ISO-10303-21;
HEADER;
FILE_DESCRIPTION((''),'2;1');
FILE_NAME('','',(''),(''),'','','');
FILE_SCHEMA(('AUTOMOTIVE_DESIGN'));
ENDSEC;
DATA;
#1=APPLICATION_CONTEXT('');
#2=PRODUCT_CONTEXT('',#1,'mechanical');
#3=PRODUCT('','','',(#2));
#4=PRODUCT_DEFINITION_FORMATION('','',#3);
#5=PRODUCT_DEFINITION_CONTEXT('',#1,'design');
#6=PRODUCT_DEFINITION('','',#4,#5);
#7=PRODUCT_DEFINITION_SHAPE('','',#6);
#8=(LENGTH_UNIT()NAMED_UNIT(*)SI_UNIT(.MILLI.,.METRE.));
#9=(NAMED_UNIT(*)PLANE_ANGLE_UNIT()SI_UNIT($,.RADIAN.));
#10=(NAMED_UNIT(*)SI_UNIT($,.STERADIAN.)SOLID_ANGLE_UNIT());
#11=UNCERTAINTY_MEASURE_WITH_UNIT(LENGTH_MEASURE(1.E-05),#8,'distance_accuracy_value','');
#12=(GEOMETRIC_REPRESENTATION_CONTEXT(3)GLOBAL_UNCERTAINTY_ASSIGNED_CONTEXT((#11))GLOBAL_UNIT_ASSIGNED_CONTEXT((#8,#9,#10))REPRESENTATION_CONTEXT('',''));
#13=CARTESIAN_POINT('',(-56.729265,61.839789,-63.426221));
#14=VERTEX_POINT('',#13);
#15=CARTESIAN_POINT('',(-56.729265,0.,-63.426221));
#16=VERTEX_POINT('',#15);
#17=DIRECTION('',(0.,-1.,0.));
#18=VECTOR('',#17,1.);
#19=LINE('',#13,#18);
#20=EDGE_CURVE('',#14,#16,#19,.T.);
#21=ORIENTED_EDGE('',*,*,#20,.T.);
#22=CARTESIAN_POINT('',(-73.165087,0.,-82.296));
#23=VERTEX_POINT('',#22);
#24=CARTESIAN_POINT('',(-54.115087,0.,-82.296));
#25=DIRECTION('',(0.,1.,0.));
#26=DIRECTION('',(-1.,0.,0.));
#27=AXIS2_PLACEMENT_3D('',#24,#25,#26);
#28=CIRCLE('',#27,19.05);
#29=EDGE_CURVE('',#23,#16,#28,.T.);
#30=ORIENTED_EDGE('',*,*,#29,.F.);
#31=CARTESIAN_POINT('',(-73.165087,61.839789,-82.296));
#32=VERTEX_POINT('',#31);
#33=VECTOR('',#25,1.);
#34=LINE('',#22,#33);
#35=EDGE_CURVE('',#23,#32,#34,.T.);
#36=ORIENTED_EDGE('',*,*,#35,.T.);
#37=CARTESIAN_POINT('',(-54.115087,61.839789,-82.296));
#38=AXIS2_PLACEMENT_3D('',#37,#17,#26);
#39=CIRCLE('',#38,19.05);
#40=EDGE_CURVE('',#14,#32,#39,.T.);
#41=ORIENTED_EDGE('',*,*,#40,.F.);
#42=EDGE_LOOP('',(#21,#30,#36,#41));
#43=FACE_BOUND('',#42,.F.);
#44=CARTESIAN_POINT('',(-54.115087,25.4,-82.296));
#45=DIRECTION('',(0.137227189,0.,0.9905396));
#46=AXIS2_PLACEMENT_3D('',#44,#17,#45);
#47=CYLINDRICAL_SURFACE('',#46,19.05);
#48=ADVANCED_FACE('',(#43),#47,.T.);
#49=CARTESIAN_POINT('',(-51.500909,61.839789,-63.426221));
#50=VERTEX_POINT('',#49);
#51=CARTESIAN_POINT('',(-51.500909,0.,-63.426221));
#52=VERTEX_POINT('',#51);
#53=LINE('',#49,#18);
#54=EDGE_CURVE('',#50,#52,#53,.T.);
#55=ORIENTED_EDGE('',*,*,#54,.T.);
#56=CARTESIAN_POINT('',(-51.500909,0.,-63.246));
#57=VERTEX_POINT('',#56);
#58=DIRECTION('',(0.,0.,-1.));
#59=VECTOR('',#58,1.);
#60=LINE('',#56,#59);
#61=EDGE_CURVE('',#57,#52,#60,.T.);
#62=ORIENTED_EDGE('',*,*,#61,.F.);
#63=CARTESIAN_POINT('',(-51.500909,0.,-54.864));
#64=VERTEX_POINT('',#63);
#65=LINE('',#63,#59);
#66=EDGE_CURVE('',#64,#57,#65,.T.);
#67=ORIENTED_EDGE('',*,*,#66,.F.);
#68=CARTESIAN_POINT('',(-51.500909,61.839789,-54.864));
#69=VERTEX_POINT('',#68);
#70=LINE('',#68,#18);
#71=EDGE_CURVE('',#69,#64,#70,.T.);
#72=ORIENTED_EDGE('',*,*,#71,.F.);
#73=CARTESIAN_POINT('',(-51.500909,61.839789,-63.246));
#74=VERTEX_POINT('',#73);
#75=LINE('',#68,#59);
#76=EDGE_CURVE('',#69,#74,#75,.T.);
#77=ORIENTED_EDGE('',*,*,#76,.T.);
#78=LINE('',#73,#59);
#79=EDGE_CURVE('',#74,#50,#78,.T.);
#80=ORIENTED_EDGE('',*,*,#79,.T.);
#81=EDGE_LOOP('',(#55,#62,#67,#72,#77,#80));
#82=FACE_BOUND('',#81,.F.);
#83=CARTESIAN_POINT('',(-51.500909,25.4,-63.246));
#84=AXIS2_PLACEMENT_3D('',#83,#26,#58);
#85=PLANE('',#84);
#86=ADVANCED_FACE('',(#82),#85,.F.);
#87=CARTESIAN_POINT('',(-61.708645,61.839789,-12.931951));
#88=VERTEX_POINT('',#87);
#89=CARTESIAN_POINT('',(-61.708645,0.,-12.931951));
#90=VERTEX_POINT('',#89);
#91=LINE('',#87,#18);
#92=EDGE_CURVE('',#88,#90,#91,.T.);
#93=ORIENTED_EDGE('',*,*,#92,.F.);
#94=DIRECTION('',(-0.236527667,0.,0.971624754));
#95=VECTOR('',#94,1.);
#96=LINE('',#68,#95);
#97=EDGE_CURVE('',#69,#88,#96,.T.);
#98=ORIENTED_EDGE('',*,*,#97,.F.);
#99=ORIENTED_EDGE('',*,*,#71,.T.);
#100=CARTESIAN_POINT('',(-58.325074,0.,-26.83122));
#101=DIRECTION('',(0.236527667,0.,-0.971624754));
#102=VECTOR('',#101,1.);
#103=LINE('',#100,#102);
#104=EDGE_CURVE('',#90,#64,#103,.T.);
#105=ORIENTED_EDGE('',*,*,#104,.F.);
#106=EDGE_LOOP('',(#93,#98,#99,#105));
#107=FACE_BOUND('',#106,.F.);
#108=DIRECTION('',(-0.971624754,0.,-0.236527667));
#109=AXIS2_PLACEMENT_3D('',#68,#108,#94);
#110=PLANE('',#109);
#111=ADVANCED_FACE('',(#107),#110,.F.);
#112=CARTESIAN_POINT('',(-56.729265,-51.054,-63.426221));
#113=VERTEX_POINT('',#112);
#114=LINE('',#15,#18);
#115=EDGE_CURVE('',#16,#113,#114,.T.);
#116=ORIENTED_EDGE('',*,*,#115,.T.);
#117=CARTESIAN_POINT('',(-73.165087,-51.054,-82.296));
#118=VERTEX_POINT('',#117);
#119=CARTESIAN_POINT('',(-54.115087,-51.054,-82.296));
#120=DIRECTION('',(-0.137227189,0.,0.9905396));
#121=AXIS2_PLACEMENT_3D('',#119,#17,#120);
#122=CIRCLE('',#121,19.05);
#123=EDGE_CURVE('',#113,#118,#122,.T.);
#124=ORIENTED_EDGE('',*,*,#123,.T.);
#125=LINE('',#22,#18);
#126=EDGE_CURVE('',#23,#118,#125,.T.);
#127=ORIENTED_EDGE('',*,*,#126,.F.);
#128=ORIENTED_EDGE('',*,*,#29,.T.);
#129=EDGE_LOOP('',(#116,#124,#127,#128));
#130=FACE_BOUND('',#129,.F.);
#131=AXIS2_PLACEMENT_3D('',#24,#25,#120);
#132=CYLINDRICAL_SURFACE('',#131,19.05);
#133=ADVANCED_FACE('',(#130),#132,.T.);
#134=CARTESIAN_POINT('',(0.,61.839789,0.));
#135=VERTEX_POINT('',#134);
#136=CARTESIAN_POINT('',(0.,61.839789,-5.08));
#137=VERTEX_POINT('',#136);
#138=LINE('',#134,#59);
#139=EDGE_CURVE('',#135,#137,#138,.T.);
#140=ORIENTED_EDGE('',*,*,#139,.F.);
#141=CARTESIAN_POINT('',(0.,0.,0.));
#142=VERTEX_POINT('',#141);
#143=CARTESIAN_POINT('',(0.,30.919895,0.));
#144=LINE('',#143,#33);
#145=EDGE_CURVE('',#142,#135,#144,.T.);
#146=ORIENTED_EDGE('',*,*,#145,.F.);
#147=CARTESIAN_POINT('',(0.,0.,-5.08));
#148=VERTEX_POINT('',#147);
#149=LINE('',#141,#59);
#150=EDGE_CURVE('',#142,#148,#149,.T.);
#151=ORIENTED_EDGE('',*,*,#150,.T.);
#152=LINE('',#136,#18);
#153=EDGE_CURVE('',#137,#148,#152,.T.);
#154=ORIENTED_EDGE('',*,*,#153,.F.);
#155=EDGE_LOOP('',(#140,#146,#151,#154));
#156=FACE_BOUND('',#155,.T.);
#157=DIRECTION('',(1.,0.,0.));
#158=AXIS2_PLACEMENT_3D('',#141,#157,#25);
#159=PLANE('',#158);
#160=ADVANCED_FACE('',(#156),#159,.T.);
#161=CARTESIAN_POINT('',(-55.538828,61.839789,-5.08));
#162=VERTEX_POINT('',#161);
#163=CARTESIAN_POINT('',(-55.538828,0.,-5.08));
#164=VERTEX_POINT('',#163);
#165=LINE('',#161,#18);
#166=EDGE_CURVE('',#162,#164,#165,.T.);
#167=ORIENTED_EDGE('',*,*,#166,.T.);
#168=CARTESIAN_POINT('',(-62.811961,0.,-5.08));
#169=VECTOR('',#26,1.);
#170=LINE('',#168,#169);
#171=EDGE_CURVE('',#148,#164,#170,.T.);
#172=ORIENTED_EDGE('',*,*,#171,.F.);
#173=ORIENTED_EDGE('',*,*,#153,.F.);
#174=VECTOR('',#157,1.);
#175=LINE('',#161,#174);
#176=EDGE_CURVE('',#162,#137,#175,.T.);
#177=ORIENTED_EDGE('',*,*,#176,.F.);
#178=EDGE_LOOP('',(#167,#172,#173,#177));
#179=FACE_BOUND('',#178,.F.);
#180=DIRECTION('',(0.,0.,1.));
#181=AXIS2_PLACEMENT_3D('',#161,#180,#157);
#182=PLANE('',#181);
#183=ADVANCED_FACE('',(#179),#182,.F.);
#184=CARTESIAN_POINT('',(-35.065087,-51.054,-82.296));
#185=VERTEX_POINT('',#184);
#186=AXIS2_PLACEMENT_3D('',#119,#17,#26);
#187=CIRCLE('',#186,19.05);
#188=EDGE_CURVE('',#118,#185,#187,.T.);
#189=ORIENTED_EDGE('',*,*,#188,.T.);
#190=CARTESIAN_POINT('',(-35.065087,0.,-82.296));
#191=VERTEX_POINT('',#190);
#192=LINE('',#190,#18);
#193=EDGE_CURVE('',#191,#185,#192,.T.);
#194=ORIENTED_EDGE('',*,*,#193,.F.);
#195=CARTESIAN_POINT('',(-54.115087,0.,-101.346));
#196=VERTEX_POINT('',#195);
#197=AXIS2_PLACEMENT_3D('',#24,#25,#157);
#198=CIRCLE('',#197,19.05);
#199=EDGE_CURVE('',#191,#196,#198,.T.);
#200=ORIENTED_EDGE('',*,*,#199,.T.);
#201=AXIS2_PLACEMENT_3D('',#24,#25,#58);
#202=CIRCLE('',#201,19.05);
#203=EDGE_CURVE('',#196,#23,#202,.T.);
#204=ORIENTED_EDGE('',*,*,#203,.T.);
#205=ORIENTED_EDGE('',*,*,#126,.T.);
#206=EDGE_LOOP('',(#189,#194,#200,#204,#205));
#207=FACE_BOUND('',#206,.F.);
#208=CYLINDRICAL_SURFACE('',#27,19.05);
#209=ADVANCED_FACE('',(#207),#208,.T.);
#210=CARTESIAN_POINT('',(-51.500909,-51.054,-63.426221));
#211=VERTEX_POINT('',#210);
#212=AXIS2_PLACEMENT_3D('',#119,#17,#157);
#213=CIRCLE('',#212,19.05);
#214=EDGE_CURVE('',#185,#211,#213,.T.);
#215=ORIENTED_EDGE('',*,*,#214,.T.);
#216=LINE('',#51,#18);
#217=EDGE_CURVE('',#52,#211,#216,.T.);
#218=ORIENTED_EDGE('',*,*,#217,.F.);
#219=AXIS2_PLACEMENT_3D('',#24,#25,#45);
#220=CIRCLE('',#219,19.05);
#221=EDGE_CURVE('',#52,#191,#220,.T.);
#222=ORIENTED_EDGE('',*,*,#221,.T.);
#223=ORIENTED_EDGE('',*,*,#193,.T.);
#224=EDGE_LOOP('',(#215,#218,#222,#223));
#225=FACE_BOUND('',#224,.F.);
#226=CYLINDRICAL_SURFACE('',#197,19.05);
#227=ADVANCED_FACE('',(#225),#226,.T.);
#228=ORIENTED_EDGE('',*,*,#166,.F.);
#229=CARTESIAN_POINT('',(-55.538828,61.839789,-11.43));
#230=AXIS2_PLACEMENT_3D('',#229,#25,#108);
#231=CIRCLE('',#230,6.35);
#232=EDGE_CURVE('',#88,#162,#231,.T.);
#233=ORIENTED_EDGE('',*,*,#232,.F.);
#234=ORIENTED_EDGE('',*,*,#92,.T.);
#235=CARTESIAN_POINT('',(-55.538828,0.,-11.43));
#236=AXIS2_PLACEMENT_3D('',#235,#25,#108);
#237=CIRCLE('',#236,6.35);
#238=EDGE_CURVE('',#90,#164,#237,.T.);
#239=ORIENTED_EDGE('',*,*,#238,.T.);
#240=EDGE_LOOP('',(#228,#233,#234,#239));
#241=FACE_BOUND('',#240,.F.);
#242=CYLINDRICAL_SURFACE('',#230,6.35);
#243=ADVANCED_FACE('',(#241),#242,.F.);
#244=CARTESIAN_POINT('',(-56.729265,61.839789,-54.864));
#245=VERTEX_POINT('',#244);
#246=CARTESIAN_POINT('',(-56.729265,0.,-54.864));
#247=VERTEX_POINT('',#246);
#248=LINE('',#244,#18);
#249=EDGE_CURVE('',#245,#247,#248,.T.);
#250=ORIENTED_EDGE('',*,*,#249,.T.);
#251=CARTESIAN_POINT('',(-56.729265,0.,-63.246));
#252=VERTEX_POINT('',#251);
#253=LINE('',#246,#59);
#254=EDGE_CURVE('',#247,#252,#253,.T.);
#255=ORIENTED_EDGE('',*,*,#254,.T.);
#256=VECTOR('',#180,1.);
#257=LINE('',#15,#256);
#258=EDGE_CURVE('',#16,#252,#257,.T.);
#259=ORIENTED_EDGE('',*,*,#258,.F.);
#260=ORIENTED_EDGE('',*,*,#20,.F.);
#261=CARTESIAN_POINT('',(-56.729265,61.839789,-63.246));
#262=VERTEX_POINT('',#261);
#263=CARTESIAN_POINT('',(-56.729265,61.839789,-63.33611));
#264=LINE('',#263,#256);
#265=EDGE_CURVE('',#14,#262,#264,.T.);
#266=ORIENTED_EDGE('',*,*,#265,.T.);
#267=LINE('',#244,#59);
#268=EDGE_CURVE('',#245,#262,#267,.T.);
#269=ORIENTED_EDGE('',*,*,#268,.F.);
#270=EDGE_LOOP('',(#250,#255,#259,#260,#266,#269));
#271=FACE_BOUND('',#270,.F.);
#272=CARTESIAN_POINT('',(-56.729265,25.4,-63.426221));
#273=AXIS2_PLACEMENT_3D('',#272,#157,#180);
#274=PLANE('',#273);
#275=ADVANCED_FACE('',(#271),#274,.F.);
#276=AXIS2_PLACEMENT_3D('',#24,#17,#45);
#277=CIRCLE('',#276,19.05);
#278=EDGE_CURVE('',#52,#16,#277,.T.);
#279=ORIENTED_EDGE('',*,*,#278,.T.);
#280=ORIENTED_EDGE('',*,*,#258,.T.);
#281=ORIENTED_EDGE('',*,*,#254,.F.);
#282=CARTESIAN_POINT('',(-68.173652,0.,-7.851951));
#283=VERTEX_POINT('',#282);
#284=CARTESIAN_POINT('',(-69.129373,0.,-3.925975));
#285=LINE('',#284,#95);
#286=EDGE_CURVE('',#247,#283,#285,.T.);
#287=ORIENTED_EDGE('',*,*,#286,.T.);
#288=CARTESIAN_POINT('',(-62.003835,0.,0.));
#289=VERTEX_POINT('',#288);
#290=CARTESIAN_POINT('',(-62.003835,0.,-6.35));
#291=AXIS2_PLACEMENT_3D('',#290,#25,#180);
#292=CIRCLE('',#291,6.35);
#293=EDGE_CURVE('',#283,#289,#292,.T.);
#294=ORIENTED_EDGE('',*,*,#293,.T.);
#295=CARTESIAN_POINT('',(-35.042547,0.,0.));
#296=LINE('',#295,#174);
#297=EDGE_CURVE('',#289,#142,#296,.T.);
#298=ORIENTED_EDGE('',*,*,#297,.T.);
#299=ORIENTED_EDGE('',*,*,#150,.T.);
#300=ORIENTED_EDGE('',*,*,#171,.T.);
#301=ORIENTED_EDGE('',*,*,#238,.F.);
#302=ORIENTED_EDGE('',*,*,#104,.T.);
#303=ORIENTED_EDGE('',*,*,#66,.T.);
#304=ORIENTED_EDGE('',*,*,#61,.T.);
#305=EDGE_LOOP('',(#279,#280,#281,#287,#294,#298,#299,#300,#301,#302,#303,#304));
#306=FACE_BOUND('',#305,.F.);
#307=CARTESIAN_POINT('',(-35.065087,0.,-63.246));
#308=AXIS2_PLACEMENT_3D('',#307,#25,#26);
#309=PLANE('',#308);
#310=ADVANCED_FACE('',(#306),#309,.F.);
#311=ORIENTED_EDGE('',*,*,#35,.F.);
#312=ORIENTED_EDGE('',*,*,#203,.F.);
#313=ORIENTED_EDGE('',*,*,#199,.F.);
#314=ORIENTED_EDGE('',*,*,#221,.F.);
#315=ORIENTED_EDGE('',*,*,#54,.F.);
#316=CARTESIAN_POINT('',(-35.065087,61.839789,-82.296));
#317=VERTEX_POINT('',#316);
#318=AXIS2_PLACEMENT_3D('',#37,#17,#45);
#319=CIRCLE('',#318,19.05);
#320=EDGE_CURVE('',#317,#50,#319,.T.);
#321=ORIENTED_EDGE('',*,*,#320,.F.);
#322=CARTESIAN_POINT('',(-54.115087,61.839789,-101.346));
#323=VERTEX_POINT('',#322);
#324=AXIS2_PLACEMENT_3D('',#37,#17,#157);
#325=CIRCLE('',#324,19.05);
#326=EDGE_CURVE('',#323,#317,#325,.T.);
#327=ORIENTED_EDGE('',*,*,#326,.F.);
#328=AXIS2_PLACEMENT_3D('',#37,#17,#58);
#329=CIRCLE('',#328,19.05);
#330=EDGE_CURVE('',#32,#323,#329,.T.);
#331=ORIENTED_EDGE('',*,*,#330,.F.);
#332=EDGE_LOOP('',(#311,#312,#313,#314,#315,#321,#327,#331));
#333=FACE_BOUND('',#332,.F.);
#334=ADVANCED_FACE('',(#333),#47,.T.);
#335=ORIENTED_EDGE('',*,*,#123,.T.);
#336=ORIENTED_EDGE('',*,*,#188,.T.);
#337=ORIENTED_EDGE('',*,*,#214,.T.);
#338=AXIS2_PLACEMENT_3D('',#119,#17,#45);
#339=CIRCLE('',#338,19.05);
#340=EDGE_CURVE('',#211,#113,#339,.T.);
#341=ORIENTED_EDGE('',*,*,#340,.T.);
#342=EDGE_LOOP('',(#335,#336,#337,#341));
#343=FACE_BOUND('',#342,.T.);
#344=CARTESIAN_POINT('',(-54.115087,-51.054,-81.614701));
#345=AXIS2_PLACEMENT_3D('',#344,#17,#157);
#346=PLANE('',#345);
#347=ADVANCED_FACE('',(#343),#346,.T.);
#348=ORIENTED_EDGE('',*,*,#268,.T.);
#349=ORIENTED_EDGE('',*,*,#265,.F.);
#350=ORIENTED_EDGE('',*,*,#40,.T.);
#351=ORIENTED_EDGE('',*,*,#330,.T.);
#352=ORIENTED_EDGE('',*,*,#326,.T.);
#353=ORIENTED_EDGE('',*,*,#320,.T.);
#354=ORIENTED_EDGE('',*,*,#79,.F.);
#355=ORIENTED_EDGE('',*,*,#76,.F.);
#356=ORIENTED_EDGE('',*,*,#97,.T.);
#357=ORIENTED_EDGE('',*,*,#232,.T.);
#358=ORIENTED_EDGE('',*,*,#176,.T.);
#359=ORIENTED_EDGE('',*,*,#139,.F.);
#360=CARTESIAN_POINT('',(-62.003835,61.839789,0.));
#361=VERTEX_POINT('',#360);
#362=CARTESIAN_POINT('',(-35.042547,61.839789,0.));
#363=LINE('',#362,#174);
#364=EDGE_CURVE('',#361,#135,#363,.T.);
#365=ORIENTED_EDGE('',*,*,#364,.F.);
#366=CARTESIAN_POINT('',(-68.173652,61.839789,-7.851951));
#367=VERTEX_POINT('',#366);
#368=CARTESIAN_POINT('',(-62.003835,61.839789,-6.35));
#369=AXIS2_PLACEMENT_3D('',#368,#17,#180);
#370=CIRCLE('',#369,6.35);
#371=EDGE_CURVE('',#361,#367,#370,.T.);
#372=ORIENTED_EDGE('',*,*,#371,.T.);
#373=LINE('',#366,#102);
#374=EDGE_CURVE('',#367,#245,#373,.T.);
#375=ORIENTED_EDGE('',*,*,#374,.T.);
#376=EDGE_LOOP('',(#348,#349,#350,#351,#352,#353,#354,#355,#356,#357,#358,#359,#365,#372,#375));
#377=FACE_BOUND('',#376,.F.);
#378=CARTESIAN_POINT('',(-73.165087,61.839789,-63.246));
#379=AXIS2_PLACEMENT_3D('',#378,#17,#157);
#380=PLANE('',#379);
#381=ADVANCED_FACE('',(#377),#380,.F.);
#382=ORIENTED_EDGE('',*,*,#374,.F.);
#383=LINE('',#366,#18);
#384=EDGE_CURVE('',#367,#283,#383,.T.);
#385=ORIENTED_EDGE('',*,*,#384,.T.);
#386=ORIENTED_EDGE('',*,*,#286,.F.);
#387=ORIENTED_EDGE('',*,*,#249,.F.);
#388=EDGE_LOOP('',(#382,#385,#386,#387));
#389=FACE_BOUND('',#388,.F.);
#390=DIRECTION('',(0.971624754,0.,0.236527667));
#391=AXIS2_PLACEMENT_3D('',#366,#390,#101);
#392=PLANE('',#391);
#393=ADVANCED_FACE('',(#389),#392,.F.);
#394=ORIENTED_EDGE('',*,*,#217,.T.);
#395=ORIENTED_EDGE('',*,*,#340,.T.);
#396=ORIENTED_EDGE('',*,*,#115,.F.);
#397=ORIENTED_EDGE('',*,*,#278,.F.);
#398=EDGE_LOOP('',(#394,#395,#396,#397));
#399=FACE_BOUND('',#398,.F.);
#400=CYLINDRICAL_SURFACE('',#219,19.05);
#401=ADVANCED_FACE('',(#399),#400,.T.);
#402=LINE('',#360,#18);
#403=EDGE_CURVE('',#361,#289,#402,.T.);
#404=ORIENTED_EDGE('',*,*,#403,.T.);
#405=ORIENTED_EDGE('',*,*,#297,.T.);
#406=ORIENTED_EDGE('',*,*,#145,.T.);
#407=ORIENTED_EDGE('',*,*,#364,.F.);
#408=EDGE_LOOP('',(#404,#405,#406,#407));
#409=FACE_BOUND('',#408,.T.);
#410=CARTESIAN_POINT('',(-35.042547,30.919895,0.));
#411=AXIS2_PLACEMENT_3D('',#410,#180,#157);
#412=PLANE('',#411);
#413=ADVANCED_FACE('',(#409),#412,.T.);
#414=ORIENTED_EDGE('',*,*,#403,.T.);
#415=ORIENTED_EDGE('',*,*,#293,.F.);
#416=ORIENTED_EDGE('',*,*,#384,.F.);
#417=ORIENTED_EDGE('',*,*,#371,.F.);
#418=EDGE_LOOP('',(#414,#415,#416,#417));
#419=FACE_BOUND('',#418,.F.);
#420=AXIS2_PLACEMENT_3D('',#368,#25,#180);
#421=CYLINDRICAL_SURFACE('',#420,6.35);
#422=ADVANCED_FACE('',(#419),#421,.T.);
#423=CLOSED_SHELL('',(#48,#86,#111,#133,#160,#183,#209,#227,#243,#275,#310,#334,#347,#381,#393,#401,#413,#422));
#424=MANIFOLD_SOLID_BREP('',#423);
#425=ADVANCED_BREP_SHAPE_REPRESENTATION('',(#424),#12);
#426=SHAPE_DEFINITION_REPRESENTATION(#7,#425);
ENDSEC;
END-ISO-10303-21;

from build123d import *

# Parameters (mm, degrees)
F0_W      = 70.085093379
F0_H      = 61.8397891521
F1_DEPTH  = 54.864
F3_DEPTH  = 61.8407891521
F4_W      = 5.2283558833
F4_H      = 61.8397891521
F5_DEPTH  = 8.382
F6_W      = 5.2283558833
F6_H      = 61.8397891521
F6_W_2    = 16.4358220583
F7_DEPTH  = 38.1
F9_DEPTH  = 25.4
F10_DEPTH = 36.4407891521
F12_DEPTH = 51.054


# Not quite as in the source:
# - after a boolean that leaves OpenCascade's solid faulty, fix() repairs it


with BuildPart() as f1:
    # F0 (on Top) → F1 (new body)
    with BuildSketch(Plane.XY):
        with Locations((-35.0425466895, 30.9198945761)):
            Rectangle(F0_W, F0_H)
    extrude(amount=-F1_DEPTH)

    # F2 (on face) → F3 (cut, through all)
    with BuildSketch(Plane(origin=(0, 61.8397891521, 0), x_dir=(-1, 0, 0), z_dir=(0, 1, 0))):
        with BuildLine():
            Line((0, -54.864), (51.500908674, -54.864))
            Line((51.500908674, -54.864), (61.7086454928, -12.9319506824))
            ThreePointArc((61.7086454928, -12.9319506824), (60.5318177305, -7.5066651196), (55.5388283037, -5.08))
            Line((55.5388283037, -5.08), (52.6744276285, -5.08))
            Line((52.6744276285, -5.08), (0, -5.08))
            Line((0, -5.08), (0, -54.864))
        make_face()
        with BuildLine():
            ThreePointArc((62.0038350038, 0), (66.9968244307, -2.4266651196), (68.173652193, -7.8519506824))
            Line((68.173652193, -7.8519506824), (56.7292645574, -54.864))
            Line((56.7292645574, -54.864), (70.085093379, -54.864))
            Line((70.085093379, -54.864), (70.085093379, 0))
            Line((70.085093379, 0), (62.0038350038, 0))
        make_face()
    extrude(amount=-F3_DEPTH, mode=Mode.SUBTRACT)

    # F4 (on face) → F5 (join)
    with BuildSketch(Plane(origin=(0, 0, -54.864), x_dir=(1, 0, 0), z_dir=(0, 0, -1))):
        with Locations((-54.1150866157, -30.9198945761)):
            Rectangle(F4_W, F4_H)
    extrude(amount=F5_DEPTH)

    # F6 (on face) → F7 (join)
    with BuildSketch(Plane(origin=(0, 0, -63.246), x_dir=(1, 0, 0), z_dir=(0, 0, -1))):
        with Locations((-54.1150866157, -30.9198945761)):
            Rectangle(F6_W, F6_H)
        with Locations((-43.2829976449, -30.9198945761)):
            Rectangle(F6_W_2, F6_H)
        with Locations((-64.9471755865, -30.9198945761)):
            Rectangle(F6_W_2, F6_H)
    extrude(amount=F7_DEPTH)

    # F8 (on face) → F9 (cut)
    with BuildSketch(Plane.XZ):
        with BuildLine():
            ThreePointArc((-51.500908674, -63.4262206243), (-39.7501537967, -69.7839575966), (-35.0650866157, -82.296))
            Line((-35.0650866157, -82.296), (-35.0650866157, -63.246))
            Line((-35.0650866157, -63.246), (-51.500908674, -63.246))
            Line((-51.500908674, -63.246), (-51.500908674, -63.4262206243))
        make_face()
        with BuildLine():
            ThreePointArc((-73.1650866157, -82.296), (-68.4800194347, -69.7839575966), (-56.7292645574, -63.4262206243))
            Line((-56.7292645574, -63.4262206243), (-56.7292645574, -63.246))
            Line((-56.7292645574, -63.246), (-73.1650866157, -63.246))
            Line((-73.1650866157, -63.246), (-73.1650866157, -82.296))
        make_face()
        with BuildLine():
            Line((-35.0650866157, -101.346), (-35.0650866157, -82.296))
            ThreePointArc((-35.0650866157, -82.296), (-40.6447024341, -95.7663841816), (-54.1150866157, -101.346))
            Line((-54.1150866157, -101.346), (-35.0650866157, -101.346))
        make_face()
        with BuildLine():
            Line((-73.1650866157, -101.346), (-54.1150866157, -101.346))
            ThreePointArc((-54.1150866157, -101.346), (-67.5854707973, -95.7663841816), (-73.1650866157, -82.296))
            Line((-73.1650866157, -82.296), (-73.1650866157, -101.346))
        make_face()
    extrude(amount=-F9_DEPTH, mode=Mode.SUBTRACT)

    # F10 (cut, through all): faces of the model
    f10_faces = [f1.faces().sort_by_distance(p)[0] for p in [
        (-39.2943641898, 25.4, -67.5096317249),
        (-39.3202458526, 25.4, -97.0908407631),
        (-68.9099273788, 25.4, -97.0908407631),
        (-68.9358090416, 25.4, -67.5096317249),
    ]]
    extrude(f10_faces, amount=-F10_DEPTH, mode=Mode.SUBTRACT)

    # F11 (on face) → F12 (join)
    with BuildSketch(Plane.XZ):
        with BuildLine():
            ThreePointArc((-73.1650866157, -82.296), (-54.1150866157, -101.346), (-35.0650866157, -82.296))
            ThreePointArc((-35.0650866157, -82.296), (-39.7501537967, -69.7839575966), (-51.500908674, -63.4262206243))
            ThreePointArc((-51.500908674, -63.4262206243), (-54.1150866157, -63.246), (-56.7292645574, -63.4262206243))
            ThreePointArc((-56.7292645574, -63.4262206243), (-68.4800194347, -69.7839575966), (-73.1650866157, -82.296))
        make_face()
    extrude(amount=F12_DEPTH)

    add(f1.part.fix(), mode=Mode.REPLACE)


solid = f1.part
